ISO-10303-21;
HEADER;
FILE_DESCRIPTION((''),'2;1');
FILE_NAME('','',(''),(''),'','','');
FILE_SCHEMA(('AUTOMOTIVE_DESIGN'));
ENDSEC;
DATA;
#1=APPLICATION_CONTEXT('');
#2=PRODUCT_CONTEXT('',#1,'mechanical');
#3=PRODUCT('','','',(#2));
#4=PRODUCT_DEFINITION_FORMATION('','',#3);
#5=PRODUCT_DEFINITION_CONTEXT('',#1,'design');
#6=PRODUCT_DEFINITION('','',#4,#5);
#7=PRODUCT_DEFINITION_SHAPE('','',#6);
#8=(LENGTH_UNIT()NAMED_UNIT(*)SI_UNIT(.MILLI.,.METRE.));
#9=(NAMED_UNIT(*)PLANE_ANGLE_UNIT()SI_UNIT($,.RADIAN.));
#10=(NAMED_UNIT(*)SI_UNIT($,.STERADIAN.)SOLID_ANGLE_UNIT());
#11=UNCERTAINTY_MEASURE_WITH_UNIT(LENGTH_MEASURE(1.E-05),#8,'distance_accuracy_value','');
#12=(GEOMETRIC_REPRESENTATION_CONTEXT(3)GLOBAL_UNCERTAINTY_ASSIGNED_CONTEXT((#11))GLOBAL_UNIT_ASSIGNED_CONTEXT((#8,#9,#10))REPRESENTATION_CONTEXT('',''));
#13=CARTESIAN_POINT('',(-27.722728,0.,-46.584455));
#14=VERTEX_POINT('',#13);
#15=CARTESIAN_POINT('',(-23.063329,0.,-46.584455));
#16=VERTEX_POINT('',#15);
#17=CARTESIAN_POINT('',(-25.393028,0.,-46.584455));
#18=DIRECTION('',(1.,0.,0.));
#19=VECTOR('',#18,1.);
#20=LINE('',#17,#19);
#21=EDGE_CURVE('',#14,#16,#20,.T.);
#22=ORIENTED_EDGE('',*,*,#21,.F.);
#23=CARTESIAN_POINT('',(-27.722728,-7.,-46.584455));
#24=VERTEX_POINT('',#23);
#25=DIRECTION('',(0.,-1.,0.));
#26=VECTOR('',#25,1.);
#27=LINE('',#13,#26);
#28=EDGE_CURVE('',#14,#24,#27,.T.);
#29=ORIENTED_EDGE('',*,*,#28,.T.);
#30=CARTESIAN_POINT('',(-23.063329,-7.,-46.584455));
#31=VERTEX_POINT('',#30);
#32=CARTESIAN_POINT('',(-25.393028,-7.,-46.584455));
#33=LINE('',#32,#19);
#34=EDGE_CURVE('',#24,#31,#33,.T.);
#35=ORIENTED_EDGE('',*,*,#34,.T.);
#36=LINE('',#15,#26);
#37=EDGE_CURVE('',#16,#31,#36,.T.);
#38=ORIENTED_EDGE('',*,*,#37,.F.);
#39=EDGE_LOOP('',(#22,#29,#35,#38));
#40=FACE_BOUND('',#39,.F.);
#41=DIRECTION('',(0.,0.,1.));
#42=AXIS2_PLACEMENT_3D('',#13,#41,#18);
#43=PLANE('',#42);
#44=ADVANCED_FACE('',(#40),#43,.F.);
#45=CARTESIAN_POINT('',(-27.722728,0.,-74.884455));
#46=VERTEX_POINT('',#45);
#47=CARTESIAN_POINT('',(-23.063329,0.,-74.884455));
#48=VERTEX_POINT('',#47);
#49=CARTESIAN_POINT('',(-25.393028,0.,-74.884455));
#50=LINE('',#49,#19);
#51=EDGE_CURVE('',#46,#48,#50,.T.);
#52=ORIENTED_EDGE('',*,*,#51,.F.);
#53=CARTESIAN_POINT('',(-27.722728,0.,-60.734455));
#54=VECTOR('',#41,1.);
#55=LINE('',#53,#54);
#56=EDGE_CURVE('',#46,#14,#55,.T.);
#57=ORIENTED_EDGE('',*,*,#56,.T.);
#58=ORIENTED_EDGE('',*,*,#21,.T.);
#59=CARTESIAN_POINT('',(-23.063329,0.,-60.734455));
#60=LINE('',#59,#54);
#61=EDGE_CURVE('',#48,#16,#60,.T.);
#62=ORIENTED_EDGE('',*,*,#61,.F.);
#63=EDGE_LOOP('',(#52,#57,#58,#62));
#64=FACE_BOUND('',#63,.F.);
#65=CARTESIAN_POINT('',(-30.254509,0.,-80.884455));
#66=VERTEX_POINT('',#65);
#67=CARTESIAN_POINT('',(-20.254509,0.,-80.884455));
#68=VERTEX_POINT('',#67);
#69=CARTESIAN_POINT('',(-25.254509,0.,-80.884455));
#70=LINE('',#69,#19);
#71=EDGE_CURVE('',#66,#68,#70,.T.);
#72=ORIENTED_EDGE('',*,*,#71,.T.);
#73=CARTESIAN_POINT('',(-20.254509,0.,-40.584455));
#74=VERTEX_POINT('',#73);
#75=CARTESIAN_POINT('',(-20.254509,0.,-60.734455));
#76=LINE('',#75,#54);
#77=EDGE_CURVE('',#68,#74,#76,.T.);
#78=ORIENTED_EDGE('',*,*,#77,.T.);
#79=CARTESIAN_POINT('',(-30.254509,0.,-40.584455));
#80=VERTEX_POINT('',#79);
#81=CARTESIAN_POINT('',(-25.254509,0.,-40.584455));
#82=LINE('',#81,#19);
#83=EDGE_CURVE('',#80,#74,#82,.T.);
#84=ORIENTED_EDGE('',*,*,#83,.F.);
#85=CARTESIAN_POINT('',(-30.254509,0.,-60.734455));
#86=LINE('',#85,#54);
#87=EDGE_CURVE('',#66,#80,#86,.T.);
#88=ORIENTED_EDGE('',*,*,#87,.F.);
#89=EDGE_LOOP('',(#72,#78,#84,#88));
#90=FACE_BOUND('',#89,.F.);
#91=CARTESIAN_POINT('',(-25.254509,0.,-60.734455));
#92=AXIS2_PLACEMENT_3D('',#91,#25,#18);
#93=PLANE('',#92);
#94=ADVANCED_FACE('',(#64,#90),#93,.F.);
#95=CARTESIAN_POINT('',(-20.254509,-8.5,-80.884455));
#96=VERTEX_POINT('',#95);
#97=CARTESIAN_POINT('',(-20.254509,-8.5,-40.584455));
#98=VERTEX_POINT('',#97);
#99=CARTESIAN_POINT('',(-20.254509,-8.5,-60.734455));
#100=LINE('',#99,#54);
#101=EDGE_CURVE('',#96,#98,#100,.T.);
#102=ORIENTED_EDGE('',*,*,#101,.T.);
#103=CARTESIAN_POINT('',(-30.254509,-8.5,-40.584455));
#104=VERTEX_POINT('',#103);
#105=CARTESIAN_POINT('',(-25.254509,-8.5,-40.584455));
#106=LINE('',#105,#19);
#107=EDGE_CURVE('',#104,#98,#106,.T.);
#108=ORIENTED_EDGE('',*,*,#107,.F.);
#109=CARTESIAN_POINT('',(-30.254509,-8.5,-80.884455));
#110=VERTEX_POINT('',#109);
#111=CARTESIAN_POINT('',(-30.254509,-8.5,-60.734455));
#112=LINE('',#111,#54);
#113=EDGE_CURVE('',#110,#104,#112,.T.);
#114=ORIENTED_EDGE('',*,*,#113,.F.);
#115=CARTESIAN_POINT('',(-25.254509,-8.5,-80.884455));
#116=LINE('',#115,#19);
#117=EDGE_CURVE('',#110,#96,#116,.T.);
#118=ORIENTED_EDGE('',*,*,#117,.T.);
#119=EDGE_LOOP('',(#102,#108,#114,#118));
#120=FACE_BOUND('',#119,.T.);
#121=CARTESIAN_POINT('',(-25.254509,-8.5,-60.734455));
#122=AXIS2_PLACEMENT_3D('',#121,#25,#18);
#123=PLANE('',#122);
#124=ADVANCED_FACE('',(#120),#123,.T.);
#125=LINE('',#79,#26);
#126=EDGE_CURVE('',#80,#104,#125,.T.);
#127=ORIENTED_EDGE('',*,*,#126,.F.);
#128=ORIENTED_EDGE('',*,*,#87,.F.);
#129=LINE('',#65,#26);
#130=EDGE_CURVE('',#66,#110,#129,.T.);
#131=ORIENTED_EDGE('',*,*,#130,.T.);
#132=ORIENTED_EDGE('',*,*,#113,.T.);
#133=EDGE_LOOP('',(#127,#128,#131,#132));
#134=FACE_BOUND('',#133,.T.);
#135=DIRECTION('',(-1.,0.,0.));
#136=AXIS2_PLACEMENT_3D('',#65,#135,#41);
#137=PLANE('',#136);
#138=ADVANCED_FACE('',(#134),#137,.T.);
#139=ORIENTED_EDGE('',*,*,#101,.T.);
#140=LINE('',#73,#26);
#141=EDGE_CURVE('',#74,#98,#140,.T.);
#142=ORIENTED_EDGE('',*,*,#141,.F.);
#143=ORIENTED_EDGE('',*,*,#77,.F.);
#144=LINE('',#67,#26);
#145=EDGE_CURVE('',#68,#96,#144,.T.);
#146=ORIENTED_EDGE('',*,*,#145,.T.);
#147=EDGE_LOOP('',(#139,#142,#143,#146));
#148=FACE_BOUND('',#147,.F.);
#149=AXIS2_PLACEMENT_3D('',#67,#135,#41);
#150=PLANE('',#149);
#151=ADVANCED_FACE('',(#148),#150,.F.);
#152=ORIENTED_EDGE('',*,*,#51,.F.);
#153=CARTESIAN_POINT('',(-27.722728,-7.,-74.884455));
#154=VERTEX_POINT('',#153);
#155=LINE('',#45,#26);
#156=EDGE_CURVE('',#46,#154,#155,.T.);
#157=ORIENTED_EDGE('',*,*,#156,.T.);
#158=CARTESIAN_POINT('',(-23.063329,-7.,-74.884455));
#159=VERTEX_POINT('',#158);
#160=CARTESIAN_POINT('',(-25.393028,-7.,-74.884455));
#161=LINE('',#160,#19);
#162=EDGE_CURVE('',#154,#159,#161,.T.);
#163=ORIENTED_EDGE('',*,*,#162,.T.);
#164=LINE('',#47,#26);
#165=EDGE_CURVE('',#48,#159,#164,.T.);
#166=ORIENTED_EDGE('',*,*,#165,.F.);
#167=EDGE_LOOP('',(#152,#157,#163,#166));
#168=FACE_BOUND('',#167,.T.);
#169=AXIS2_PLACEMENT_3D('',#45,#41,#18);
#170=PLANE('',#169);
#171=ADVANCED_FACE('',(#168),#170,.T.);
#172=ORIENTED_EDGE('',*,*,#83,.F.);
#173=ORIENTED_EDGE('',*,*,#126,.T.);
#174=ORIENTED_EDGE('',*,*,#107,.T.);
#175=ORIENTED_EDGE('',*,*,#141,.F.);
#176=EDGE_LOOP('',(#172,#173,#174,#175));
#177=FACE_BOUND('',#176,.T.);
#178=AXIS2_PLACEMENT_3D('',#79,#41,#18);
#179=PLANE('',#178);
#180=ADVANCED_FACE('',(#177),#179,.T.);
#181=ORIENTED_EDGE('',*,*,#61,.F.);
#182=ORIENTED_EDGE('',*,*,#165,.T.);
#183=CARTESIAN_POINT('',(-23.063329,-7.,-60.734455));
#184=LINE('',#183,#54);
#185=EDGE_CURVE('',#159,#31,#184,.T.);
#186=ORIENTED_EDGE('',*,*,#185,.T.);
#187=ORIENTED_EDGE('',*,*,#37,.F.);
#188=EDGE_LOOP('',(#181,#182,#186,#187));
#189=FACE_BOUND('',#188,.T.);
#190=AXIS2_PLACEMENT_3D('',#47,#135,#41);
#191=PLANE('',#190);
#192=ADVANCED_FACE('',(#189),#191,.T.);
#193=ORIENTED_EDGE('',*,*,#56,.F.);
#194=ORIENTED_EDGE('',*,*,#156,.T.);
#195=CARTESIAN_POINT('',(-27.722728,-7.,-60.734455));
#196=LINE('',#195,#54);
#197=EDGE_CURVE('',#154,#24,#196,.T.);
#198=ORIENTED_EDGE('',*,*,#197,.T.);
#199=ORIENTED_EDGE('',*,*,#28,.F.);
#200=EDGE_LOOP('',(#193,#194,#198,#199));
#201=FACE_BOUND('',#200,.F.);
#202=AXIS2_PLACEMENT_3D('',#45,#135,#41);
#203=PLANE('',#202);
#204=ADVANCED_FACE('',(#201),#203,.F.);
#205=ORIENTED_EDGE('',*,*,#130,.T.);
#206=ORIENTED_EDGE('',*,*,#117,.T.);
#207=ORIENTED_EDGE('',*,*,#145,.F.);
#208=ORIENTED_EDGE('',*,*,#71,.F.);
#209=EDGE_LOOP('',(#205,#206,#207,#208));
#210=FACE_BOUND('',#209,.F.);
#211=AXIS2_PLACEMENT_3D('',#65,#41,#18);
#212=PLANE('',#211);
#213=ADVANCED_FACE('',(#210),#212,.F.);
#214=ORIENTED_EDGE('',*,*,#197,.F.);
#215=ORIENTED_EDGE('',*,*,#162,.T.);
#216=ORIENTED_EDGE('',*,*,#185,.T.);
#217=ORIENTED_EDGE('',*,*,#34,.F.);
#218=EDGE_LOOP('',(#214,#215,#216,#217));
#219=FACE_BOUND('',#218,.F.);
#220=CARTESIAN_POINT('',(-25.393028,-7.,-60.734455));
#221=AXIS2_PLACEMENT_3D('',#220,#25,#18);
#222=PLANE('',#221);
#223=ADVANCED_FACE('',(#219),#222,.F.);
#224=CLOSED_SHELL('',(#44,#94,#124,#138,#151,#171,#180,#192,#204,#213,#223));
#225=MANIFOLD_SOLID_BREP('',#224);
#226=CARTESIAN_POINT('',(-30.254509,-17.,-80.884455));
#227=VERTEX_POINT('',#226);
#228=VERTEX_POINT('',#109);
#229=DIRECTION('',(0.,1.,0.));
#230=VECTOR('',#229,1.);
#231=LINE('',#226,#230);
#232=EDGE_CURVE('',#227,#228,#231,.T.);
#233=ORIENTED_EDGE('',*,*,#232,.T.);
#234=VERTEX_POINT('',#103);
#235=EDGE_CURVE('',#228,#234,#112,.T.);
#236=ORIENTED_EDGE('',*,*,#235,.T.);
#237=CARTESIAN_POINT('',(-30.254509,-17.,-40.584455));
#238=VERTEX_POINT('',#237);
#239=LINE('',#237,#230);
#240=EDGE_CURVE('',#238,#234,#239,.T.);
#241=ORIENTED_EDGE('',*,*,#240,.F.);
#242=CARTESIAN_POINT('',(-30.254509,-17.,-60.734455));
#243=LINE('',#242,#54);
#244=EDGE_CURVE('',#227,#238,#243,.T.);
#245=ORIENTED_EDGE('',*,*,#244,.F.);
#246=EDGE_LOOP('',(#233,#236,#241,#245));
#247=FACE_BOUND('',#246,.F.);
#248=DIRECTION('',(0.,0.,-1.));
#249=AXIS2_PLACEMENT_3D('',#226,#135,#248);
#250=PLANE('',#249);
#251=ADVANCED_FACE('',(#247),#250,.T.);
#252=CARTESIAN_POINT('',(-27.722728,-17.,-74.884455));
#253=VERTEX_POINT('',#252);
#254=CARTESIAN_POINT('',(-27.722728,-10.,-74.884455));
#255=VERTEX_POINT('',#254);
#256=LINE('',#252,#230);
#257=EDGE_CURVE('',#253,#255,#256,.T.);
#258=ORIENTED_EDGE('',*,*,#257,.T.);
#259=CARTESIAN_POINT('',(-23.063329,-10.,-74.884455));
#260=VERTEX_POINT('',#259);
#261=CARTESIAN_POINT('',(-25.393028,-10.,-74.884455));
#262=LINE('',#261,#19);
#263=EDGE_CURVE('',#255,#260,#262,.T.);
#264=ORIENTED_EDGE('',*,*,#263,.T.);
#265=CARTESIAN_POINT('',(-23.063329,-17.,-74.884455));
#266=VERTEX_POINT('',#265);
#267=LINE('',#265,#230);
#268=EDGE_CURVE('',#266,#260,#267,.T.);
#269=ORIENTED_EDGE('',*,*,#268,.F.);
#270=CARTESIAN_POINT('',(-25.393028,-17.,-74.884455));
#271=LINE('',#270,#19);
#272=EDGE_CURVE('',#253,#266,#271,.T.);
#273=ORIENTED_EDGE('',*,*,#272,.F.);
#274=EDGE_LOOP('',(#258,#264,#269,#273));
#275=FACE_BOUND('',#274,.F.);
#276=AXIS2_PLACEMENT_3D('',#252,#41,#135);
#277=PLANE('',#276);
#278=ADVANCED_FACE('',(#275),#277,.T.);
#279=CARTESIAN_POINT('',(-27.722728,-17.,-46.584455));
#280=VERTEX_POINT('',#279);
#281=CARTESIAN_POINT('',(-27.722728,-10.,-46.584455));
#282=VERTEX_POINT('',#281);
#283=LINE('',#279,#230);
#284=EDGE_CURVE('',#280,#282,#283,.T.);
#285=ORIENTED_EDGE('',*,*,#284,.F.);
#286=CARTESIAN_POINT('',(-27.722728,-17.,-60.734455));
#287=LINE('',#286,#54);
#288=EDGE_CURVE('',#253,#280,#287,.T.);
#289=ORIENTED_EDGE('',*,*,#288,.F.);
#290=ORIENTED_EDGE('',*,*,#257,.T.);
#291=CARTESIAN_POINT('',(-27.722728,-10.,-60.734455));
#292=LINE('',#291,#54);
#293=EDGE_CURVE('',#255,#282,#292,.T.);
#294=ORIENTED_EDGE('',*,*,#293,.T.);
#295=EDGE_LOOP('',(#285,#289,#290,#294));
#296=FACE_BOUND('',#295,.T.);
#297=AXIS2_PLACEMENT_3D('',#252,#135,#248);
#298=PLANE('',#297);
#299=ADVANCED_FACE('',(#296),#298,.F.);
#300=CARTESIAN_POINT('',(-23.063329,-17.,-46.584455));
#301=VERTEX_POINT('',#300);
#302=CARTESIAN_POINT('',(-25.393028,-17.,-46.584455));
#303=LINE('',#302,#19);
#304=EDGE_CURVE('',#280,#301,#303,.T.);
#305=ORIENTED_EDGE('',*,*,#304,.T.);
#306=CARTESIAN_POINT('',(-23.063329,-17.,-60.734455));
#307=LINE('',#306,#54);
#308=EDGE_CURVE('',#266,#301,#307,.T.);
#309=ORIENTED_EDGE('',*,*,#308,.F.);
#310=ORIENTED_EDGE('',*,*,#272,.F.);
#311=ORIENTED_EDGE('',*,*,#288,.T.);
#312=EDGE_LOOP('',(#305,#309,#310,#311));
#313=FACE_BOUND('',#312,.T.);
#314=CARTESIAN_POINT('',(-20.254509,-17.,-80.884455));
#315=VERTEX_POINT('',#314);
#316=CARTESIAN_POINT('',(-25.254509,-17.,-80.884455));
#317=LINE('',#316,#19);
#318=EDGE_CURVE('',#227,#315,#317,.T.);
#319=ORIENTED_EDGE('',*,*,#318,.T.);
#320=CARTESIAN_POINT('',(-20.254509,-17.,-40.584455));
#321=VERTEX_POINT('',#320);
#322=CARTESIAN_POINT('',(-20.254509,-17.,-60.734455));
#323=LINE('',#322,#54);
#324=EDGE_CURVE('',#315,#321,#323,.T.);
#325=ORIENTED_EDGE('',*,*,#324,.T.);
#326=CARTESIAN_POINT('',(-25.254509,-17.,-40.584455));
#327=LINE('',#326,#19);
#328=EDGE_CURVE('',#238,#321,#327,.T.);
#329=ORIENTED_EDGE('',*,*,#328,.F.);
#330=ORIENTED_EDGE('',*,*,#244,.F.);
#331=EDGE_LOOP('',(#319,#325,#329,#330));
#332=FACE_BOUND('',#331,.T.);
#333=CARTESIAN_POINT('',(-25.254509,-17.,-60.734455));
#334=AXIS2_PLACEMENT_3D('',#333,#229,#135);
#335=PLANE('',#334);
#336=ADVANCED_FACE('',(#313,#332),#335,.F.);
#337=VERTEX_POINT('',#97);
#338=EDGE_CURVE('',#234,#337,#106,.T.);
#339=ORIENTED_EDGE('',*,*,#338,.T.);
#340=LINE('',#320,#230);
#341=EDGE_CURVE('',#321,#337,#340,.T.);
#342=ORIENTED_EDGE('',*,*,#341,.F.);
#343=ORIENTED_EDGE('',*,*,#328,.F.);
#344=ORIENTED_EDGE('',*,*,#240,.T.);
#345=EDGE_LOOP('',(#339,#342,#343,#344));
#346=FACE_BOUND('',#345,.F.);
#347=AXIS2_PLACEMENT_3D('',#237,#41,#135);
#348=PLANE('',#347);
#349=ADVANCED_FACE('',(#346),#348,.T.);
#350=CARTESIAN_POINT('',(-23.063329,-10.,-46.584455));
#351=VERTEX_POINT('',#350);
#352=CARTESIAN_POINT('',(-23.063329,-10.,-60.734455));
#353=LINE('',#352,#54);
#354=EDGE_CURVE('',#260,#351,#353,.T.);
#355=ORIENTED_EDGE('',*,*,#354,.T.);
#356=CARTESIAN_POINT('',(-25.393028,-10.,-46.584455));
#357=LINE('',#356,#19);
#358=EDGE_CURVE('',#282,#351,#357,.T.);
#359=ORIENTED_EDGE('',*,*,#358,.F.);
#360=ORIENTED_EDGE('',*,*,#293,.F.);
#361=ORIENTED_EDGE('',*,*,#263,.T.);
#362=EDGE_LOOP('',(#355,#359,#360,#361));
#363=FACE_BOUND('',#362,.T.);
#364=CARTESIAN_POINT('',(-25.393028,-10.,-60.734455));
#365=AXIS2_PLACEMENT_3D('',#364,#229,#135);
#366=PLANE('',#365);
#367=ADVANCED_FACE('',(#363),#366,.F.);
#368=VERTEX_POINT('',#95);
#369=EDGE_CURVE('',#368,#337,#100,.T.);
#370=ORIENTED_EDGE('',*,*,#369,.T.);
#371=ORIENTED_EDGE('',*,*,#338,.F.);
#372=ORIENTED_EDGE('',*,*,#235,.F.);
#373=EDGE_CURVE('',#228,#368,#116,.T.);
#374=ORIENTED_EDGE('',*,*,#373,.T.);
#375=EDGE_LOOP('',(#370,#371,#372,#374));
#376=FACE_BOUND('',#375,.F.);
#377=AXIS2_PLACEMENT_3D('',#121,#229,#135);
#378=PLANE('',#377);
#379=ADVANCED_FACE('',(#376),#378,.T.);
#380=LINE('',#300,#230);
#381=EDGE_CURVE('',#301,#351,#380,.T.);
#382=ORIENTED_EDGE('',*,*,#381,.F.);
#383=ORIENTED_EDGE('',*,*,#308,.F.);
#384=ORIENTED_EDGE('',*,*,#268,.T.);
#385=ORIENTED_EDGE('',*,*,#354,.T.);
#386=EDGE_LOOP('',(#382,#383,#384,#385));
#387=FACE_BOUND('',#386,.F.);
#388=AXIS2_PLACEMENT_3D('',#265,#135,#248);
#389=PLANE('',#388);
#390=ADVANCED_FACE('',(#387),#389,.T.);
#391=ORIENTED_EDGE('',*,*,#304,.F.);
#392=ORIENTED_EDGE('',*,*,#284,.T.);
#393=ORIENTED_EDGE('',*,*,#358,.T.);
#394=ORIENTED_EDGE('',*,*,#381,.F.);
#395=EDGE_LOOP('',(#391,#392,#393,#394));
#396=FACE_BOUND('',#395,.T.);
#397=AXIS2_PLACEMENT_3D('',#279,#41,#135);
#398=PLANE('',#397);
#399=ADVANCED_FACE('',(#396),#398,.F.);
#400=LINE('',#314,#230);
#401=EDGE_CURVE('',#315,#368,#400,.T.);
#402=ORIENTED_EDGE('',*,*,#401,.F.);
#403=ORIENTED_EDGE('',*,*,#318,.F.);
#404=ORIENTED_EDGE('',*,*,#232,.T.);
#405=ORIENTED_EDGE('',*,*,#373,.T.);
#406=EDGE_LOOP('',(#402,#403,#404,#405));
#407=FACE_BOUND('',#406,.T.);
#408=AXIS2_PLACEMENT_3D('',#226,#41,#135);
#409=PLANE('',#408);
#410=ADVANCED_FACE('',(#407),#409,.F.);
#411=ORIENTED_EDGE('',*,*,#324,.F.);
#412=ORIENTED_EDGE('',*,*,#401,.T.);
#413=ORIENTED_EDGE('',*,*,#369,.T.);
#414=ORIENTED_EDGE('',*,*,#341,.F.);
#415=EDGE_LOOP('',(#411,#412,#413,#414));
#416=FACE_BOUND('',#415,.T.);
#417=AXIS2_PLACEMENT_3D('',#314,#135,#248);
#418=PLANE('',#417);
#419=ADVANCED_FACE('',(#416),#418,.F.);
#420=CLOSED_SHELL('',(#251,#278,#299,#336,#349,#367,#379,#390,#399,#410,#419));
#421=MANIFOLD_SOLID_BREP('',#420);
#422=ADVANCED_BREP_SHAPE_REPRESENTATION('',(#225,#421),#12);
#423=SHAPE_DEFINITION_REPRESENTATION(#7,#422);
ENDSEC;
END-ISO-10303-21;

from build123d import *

# Parameters (mm, degrees)
F0_W     = 10
F0_H     = 40.3
F0_W_2   = 4.6593984449
F0_H_2   = 28.3
F1_DEPTH = 8.5
F2_DEPTH = 7


# Not quite as in the source:
# - a feature names something its author has since deleted; it is built from what else it names


with BuildPart() as f1:
    # F0 (on Front) → F1 (new body)
    with BuildSketch(Plane.XZ):
        with Locations((-25.2545091997, -60.7344553381)):
            Rectangle(F0_W, F0_H)
        with Locations((-25.3930282849, -60.7344553381)):
            Rectangle(F0_W_2, F0_H_2, mode=Mode.SUBTRACT)
        with Locations((-25.3930282849, -60.7344553381)):
            Rectangle(F0_W_2, F0_H_2)
    extrude(amount=F1_DEPTH)

    # F0 (on Front) → F2 (cut)
    with BuildSketch(Plane.XZ):
        with Locations((-25.3930282849, -60.7344553381)):
            Rectangle(F0_W_2, F0_H_2)
    extrude(amount=F2_DEPTH, mode=Mode.SUBTRACT)


with BuildPart() as f3_1:
    # F3: instance of F1
    add(f1.part.mirror(Plane(origin=(-25.2545091997, -8.5, -60.7344553381), x_dir=(1, 0, 0), z_dir=(0, -1, 0))))


solid = Compound([f1.part, f3_1.part])
